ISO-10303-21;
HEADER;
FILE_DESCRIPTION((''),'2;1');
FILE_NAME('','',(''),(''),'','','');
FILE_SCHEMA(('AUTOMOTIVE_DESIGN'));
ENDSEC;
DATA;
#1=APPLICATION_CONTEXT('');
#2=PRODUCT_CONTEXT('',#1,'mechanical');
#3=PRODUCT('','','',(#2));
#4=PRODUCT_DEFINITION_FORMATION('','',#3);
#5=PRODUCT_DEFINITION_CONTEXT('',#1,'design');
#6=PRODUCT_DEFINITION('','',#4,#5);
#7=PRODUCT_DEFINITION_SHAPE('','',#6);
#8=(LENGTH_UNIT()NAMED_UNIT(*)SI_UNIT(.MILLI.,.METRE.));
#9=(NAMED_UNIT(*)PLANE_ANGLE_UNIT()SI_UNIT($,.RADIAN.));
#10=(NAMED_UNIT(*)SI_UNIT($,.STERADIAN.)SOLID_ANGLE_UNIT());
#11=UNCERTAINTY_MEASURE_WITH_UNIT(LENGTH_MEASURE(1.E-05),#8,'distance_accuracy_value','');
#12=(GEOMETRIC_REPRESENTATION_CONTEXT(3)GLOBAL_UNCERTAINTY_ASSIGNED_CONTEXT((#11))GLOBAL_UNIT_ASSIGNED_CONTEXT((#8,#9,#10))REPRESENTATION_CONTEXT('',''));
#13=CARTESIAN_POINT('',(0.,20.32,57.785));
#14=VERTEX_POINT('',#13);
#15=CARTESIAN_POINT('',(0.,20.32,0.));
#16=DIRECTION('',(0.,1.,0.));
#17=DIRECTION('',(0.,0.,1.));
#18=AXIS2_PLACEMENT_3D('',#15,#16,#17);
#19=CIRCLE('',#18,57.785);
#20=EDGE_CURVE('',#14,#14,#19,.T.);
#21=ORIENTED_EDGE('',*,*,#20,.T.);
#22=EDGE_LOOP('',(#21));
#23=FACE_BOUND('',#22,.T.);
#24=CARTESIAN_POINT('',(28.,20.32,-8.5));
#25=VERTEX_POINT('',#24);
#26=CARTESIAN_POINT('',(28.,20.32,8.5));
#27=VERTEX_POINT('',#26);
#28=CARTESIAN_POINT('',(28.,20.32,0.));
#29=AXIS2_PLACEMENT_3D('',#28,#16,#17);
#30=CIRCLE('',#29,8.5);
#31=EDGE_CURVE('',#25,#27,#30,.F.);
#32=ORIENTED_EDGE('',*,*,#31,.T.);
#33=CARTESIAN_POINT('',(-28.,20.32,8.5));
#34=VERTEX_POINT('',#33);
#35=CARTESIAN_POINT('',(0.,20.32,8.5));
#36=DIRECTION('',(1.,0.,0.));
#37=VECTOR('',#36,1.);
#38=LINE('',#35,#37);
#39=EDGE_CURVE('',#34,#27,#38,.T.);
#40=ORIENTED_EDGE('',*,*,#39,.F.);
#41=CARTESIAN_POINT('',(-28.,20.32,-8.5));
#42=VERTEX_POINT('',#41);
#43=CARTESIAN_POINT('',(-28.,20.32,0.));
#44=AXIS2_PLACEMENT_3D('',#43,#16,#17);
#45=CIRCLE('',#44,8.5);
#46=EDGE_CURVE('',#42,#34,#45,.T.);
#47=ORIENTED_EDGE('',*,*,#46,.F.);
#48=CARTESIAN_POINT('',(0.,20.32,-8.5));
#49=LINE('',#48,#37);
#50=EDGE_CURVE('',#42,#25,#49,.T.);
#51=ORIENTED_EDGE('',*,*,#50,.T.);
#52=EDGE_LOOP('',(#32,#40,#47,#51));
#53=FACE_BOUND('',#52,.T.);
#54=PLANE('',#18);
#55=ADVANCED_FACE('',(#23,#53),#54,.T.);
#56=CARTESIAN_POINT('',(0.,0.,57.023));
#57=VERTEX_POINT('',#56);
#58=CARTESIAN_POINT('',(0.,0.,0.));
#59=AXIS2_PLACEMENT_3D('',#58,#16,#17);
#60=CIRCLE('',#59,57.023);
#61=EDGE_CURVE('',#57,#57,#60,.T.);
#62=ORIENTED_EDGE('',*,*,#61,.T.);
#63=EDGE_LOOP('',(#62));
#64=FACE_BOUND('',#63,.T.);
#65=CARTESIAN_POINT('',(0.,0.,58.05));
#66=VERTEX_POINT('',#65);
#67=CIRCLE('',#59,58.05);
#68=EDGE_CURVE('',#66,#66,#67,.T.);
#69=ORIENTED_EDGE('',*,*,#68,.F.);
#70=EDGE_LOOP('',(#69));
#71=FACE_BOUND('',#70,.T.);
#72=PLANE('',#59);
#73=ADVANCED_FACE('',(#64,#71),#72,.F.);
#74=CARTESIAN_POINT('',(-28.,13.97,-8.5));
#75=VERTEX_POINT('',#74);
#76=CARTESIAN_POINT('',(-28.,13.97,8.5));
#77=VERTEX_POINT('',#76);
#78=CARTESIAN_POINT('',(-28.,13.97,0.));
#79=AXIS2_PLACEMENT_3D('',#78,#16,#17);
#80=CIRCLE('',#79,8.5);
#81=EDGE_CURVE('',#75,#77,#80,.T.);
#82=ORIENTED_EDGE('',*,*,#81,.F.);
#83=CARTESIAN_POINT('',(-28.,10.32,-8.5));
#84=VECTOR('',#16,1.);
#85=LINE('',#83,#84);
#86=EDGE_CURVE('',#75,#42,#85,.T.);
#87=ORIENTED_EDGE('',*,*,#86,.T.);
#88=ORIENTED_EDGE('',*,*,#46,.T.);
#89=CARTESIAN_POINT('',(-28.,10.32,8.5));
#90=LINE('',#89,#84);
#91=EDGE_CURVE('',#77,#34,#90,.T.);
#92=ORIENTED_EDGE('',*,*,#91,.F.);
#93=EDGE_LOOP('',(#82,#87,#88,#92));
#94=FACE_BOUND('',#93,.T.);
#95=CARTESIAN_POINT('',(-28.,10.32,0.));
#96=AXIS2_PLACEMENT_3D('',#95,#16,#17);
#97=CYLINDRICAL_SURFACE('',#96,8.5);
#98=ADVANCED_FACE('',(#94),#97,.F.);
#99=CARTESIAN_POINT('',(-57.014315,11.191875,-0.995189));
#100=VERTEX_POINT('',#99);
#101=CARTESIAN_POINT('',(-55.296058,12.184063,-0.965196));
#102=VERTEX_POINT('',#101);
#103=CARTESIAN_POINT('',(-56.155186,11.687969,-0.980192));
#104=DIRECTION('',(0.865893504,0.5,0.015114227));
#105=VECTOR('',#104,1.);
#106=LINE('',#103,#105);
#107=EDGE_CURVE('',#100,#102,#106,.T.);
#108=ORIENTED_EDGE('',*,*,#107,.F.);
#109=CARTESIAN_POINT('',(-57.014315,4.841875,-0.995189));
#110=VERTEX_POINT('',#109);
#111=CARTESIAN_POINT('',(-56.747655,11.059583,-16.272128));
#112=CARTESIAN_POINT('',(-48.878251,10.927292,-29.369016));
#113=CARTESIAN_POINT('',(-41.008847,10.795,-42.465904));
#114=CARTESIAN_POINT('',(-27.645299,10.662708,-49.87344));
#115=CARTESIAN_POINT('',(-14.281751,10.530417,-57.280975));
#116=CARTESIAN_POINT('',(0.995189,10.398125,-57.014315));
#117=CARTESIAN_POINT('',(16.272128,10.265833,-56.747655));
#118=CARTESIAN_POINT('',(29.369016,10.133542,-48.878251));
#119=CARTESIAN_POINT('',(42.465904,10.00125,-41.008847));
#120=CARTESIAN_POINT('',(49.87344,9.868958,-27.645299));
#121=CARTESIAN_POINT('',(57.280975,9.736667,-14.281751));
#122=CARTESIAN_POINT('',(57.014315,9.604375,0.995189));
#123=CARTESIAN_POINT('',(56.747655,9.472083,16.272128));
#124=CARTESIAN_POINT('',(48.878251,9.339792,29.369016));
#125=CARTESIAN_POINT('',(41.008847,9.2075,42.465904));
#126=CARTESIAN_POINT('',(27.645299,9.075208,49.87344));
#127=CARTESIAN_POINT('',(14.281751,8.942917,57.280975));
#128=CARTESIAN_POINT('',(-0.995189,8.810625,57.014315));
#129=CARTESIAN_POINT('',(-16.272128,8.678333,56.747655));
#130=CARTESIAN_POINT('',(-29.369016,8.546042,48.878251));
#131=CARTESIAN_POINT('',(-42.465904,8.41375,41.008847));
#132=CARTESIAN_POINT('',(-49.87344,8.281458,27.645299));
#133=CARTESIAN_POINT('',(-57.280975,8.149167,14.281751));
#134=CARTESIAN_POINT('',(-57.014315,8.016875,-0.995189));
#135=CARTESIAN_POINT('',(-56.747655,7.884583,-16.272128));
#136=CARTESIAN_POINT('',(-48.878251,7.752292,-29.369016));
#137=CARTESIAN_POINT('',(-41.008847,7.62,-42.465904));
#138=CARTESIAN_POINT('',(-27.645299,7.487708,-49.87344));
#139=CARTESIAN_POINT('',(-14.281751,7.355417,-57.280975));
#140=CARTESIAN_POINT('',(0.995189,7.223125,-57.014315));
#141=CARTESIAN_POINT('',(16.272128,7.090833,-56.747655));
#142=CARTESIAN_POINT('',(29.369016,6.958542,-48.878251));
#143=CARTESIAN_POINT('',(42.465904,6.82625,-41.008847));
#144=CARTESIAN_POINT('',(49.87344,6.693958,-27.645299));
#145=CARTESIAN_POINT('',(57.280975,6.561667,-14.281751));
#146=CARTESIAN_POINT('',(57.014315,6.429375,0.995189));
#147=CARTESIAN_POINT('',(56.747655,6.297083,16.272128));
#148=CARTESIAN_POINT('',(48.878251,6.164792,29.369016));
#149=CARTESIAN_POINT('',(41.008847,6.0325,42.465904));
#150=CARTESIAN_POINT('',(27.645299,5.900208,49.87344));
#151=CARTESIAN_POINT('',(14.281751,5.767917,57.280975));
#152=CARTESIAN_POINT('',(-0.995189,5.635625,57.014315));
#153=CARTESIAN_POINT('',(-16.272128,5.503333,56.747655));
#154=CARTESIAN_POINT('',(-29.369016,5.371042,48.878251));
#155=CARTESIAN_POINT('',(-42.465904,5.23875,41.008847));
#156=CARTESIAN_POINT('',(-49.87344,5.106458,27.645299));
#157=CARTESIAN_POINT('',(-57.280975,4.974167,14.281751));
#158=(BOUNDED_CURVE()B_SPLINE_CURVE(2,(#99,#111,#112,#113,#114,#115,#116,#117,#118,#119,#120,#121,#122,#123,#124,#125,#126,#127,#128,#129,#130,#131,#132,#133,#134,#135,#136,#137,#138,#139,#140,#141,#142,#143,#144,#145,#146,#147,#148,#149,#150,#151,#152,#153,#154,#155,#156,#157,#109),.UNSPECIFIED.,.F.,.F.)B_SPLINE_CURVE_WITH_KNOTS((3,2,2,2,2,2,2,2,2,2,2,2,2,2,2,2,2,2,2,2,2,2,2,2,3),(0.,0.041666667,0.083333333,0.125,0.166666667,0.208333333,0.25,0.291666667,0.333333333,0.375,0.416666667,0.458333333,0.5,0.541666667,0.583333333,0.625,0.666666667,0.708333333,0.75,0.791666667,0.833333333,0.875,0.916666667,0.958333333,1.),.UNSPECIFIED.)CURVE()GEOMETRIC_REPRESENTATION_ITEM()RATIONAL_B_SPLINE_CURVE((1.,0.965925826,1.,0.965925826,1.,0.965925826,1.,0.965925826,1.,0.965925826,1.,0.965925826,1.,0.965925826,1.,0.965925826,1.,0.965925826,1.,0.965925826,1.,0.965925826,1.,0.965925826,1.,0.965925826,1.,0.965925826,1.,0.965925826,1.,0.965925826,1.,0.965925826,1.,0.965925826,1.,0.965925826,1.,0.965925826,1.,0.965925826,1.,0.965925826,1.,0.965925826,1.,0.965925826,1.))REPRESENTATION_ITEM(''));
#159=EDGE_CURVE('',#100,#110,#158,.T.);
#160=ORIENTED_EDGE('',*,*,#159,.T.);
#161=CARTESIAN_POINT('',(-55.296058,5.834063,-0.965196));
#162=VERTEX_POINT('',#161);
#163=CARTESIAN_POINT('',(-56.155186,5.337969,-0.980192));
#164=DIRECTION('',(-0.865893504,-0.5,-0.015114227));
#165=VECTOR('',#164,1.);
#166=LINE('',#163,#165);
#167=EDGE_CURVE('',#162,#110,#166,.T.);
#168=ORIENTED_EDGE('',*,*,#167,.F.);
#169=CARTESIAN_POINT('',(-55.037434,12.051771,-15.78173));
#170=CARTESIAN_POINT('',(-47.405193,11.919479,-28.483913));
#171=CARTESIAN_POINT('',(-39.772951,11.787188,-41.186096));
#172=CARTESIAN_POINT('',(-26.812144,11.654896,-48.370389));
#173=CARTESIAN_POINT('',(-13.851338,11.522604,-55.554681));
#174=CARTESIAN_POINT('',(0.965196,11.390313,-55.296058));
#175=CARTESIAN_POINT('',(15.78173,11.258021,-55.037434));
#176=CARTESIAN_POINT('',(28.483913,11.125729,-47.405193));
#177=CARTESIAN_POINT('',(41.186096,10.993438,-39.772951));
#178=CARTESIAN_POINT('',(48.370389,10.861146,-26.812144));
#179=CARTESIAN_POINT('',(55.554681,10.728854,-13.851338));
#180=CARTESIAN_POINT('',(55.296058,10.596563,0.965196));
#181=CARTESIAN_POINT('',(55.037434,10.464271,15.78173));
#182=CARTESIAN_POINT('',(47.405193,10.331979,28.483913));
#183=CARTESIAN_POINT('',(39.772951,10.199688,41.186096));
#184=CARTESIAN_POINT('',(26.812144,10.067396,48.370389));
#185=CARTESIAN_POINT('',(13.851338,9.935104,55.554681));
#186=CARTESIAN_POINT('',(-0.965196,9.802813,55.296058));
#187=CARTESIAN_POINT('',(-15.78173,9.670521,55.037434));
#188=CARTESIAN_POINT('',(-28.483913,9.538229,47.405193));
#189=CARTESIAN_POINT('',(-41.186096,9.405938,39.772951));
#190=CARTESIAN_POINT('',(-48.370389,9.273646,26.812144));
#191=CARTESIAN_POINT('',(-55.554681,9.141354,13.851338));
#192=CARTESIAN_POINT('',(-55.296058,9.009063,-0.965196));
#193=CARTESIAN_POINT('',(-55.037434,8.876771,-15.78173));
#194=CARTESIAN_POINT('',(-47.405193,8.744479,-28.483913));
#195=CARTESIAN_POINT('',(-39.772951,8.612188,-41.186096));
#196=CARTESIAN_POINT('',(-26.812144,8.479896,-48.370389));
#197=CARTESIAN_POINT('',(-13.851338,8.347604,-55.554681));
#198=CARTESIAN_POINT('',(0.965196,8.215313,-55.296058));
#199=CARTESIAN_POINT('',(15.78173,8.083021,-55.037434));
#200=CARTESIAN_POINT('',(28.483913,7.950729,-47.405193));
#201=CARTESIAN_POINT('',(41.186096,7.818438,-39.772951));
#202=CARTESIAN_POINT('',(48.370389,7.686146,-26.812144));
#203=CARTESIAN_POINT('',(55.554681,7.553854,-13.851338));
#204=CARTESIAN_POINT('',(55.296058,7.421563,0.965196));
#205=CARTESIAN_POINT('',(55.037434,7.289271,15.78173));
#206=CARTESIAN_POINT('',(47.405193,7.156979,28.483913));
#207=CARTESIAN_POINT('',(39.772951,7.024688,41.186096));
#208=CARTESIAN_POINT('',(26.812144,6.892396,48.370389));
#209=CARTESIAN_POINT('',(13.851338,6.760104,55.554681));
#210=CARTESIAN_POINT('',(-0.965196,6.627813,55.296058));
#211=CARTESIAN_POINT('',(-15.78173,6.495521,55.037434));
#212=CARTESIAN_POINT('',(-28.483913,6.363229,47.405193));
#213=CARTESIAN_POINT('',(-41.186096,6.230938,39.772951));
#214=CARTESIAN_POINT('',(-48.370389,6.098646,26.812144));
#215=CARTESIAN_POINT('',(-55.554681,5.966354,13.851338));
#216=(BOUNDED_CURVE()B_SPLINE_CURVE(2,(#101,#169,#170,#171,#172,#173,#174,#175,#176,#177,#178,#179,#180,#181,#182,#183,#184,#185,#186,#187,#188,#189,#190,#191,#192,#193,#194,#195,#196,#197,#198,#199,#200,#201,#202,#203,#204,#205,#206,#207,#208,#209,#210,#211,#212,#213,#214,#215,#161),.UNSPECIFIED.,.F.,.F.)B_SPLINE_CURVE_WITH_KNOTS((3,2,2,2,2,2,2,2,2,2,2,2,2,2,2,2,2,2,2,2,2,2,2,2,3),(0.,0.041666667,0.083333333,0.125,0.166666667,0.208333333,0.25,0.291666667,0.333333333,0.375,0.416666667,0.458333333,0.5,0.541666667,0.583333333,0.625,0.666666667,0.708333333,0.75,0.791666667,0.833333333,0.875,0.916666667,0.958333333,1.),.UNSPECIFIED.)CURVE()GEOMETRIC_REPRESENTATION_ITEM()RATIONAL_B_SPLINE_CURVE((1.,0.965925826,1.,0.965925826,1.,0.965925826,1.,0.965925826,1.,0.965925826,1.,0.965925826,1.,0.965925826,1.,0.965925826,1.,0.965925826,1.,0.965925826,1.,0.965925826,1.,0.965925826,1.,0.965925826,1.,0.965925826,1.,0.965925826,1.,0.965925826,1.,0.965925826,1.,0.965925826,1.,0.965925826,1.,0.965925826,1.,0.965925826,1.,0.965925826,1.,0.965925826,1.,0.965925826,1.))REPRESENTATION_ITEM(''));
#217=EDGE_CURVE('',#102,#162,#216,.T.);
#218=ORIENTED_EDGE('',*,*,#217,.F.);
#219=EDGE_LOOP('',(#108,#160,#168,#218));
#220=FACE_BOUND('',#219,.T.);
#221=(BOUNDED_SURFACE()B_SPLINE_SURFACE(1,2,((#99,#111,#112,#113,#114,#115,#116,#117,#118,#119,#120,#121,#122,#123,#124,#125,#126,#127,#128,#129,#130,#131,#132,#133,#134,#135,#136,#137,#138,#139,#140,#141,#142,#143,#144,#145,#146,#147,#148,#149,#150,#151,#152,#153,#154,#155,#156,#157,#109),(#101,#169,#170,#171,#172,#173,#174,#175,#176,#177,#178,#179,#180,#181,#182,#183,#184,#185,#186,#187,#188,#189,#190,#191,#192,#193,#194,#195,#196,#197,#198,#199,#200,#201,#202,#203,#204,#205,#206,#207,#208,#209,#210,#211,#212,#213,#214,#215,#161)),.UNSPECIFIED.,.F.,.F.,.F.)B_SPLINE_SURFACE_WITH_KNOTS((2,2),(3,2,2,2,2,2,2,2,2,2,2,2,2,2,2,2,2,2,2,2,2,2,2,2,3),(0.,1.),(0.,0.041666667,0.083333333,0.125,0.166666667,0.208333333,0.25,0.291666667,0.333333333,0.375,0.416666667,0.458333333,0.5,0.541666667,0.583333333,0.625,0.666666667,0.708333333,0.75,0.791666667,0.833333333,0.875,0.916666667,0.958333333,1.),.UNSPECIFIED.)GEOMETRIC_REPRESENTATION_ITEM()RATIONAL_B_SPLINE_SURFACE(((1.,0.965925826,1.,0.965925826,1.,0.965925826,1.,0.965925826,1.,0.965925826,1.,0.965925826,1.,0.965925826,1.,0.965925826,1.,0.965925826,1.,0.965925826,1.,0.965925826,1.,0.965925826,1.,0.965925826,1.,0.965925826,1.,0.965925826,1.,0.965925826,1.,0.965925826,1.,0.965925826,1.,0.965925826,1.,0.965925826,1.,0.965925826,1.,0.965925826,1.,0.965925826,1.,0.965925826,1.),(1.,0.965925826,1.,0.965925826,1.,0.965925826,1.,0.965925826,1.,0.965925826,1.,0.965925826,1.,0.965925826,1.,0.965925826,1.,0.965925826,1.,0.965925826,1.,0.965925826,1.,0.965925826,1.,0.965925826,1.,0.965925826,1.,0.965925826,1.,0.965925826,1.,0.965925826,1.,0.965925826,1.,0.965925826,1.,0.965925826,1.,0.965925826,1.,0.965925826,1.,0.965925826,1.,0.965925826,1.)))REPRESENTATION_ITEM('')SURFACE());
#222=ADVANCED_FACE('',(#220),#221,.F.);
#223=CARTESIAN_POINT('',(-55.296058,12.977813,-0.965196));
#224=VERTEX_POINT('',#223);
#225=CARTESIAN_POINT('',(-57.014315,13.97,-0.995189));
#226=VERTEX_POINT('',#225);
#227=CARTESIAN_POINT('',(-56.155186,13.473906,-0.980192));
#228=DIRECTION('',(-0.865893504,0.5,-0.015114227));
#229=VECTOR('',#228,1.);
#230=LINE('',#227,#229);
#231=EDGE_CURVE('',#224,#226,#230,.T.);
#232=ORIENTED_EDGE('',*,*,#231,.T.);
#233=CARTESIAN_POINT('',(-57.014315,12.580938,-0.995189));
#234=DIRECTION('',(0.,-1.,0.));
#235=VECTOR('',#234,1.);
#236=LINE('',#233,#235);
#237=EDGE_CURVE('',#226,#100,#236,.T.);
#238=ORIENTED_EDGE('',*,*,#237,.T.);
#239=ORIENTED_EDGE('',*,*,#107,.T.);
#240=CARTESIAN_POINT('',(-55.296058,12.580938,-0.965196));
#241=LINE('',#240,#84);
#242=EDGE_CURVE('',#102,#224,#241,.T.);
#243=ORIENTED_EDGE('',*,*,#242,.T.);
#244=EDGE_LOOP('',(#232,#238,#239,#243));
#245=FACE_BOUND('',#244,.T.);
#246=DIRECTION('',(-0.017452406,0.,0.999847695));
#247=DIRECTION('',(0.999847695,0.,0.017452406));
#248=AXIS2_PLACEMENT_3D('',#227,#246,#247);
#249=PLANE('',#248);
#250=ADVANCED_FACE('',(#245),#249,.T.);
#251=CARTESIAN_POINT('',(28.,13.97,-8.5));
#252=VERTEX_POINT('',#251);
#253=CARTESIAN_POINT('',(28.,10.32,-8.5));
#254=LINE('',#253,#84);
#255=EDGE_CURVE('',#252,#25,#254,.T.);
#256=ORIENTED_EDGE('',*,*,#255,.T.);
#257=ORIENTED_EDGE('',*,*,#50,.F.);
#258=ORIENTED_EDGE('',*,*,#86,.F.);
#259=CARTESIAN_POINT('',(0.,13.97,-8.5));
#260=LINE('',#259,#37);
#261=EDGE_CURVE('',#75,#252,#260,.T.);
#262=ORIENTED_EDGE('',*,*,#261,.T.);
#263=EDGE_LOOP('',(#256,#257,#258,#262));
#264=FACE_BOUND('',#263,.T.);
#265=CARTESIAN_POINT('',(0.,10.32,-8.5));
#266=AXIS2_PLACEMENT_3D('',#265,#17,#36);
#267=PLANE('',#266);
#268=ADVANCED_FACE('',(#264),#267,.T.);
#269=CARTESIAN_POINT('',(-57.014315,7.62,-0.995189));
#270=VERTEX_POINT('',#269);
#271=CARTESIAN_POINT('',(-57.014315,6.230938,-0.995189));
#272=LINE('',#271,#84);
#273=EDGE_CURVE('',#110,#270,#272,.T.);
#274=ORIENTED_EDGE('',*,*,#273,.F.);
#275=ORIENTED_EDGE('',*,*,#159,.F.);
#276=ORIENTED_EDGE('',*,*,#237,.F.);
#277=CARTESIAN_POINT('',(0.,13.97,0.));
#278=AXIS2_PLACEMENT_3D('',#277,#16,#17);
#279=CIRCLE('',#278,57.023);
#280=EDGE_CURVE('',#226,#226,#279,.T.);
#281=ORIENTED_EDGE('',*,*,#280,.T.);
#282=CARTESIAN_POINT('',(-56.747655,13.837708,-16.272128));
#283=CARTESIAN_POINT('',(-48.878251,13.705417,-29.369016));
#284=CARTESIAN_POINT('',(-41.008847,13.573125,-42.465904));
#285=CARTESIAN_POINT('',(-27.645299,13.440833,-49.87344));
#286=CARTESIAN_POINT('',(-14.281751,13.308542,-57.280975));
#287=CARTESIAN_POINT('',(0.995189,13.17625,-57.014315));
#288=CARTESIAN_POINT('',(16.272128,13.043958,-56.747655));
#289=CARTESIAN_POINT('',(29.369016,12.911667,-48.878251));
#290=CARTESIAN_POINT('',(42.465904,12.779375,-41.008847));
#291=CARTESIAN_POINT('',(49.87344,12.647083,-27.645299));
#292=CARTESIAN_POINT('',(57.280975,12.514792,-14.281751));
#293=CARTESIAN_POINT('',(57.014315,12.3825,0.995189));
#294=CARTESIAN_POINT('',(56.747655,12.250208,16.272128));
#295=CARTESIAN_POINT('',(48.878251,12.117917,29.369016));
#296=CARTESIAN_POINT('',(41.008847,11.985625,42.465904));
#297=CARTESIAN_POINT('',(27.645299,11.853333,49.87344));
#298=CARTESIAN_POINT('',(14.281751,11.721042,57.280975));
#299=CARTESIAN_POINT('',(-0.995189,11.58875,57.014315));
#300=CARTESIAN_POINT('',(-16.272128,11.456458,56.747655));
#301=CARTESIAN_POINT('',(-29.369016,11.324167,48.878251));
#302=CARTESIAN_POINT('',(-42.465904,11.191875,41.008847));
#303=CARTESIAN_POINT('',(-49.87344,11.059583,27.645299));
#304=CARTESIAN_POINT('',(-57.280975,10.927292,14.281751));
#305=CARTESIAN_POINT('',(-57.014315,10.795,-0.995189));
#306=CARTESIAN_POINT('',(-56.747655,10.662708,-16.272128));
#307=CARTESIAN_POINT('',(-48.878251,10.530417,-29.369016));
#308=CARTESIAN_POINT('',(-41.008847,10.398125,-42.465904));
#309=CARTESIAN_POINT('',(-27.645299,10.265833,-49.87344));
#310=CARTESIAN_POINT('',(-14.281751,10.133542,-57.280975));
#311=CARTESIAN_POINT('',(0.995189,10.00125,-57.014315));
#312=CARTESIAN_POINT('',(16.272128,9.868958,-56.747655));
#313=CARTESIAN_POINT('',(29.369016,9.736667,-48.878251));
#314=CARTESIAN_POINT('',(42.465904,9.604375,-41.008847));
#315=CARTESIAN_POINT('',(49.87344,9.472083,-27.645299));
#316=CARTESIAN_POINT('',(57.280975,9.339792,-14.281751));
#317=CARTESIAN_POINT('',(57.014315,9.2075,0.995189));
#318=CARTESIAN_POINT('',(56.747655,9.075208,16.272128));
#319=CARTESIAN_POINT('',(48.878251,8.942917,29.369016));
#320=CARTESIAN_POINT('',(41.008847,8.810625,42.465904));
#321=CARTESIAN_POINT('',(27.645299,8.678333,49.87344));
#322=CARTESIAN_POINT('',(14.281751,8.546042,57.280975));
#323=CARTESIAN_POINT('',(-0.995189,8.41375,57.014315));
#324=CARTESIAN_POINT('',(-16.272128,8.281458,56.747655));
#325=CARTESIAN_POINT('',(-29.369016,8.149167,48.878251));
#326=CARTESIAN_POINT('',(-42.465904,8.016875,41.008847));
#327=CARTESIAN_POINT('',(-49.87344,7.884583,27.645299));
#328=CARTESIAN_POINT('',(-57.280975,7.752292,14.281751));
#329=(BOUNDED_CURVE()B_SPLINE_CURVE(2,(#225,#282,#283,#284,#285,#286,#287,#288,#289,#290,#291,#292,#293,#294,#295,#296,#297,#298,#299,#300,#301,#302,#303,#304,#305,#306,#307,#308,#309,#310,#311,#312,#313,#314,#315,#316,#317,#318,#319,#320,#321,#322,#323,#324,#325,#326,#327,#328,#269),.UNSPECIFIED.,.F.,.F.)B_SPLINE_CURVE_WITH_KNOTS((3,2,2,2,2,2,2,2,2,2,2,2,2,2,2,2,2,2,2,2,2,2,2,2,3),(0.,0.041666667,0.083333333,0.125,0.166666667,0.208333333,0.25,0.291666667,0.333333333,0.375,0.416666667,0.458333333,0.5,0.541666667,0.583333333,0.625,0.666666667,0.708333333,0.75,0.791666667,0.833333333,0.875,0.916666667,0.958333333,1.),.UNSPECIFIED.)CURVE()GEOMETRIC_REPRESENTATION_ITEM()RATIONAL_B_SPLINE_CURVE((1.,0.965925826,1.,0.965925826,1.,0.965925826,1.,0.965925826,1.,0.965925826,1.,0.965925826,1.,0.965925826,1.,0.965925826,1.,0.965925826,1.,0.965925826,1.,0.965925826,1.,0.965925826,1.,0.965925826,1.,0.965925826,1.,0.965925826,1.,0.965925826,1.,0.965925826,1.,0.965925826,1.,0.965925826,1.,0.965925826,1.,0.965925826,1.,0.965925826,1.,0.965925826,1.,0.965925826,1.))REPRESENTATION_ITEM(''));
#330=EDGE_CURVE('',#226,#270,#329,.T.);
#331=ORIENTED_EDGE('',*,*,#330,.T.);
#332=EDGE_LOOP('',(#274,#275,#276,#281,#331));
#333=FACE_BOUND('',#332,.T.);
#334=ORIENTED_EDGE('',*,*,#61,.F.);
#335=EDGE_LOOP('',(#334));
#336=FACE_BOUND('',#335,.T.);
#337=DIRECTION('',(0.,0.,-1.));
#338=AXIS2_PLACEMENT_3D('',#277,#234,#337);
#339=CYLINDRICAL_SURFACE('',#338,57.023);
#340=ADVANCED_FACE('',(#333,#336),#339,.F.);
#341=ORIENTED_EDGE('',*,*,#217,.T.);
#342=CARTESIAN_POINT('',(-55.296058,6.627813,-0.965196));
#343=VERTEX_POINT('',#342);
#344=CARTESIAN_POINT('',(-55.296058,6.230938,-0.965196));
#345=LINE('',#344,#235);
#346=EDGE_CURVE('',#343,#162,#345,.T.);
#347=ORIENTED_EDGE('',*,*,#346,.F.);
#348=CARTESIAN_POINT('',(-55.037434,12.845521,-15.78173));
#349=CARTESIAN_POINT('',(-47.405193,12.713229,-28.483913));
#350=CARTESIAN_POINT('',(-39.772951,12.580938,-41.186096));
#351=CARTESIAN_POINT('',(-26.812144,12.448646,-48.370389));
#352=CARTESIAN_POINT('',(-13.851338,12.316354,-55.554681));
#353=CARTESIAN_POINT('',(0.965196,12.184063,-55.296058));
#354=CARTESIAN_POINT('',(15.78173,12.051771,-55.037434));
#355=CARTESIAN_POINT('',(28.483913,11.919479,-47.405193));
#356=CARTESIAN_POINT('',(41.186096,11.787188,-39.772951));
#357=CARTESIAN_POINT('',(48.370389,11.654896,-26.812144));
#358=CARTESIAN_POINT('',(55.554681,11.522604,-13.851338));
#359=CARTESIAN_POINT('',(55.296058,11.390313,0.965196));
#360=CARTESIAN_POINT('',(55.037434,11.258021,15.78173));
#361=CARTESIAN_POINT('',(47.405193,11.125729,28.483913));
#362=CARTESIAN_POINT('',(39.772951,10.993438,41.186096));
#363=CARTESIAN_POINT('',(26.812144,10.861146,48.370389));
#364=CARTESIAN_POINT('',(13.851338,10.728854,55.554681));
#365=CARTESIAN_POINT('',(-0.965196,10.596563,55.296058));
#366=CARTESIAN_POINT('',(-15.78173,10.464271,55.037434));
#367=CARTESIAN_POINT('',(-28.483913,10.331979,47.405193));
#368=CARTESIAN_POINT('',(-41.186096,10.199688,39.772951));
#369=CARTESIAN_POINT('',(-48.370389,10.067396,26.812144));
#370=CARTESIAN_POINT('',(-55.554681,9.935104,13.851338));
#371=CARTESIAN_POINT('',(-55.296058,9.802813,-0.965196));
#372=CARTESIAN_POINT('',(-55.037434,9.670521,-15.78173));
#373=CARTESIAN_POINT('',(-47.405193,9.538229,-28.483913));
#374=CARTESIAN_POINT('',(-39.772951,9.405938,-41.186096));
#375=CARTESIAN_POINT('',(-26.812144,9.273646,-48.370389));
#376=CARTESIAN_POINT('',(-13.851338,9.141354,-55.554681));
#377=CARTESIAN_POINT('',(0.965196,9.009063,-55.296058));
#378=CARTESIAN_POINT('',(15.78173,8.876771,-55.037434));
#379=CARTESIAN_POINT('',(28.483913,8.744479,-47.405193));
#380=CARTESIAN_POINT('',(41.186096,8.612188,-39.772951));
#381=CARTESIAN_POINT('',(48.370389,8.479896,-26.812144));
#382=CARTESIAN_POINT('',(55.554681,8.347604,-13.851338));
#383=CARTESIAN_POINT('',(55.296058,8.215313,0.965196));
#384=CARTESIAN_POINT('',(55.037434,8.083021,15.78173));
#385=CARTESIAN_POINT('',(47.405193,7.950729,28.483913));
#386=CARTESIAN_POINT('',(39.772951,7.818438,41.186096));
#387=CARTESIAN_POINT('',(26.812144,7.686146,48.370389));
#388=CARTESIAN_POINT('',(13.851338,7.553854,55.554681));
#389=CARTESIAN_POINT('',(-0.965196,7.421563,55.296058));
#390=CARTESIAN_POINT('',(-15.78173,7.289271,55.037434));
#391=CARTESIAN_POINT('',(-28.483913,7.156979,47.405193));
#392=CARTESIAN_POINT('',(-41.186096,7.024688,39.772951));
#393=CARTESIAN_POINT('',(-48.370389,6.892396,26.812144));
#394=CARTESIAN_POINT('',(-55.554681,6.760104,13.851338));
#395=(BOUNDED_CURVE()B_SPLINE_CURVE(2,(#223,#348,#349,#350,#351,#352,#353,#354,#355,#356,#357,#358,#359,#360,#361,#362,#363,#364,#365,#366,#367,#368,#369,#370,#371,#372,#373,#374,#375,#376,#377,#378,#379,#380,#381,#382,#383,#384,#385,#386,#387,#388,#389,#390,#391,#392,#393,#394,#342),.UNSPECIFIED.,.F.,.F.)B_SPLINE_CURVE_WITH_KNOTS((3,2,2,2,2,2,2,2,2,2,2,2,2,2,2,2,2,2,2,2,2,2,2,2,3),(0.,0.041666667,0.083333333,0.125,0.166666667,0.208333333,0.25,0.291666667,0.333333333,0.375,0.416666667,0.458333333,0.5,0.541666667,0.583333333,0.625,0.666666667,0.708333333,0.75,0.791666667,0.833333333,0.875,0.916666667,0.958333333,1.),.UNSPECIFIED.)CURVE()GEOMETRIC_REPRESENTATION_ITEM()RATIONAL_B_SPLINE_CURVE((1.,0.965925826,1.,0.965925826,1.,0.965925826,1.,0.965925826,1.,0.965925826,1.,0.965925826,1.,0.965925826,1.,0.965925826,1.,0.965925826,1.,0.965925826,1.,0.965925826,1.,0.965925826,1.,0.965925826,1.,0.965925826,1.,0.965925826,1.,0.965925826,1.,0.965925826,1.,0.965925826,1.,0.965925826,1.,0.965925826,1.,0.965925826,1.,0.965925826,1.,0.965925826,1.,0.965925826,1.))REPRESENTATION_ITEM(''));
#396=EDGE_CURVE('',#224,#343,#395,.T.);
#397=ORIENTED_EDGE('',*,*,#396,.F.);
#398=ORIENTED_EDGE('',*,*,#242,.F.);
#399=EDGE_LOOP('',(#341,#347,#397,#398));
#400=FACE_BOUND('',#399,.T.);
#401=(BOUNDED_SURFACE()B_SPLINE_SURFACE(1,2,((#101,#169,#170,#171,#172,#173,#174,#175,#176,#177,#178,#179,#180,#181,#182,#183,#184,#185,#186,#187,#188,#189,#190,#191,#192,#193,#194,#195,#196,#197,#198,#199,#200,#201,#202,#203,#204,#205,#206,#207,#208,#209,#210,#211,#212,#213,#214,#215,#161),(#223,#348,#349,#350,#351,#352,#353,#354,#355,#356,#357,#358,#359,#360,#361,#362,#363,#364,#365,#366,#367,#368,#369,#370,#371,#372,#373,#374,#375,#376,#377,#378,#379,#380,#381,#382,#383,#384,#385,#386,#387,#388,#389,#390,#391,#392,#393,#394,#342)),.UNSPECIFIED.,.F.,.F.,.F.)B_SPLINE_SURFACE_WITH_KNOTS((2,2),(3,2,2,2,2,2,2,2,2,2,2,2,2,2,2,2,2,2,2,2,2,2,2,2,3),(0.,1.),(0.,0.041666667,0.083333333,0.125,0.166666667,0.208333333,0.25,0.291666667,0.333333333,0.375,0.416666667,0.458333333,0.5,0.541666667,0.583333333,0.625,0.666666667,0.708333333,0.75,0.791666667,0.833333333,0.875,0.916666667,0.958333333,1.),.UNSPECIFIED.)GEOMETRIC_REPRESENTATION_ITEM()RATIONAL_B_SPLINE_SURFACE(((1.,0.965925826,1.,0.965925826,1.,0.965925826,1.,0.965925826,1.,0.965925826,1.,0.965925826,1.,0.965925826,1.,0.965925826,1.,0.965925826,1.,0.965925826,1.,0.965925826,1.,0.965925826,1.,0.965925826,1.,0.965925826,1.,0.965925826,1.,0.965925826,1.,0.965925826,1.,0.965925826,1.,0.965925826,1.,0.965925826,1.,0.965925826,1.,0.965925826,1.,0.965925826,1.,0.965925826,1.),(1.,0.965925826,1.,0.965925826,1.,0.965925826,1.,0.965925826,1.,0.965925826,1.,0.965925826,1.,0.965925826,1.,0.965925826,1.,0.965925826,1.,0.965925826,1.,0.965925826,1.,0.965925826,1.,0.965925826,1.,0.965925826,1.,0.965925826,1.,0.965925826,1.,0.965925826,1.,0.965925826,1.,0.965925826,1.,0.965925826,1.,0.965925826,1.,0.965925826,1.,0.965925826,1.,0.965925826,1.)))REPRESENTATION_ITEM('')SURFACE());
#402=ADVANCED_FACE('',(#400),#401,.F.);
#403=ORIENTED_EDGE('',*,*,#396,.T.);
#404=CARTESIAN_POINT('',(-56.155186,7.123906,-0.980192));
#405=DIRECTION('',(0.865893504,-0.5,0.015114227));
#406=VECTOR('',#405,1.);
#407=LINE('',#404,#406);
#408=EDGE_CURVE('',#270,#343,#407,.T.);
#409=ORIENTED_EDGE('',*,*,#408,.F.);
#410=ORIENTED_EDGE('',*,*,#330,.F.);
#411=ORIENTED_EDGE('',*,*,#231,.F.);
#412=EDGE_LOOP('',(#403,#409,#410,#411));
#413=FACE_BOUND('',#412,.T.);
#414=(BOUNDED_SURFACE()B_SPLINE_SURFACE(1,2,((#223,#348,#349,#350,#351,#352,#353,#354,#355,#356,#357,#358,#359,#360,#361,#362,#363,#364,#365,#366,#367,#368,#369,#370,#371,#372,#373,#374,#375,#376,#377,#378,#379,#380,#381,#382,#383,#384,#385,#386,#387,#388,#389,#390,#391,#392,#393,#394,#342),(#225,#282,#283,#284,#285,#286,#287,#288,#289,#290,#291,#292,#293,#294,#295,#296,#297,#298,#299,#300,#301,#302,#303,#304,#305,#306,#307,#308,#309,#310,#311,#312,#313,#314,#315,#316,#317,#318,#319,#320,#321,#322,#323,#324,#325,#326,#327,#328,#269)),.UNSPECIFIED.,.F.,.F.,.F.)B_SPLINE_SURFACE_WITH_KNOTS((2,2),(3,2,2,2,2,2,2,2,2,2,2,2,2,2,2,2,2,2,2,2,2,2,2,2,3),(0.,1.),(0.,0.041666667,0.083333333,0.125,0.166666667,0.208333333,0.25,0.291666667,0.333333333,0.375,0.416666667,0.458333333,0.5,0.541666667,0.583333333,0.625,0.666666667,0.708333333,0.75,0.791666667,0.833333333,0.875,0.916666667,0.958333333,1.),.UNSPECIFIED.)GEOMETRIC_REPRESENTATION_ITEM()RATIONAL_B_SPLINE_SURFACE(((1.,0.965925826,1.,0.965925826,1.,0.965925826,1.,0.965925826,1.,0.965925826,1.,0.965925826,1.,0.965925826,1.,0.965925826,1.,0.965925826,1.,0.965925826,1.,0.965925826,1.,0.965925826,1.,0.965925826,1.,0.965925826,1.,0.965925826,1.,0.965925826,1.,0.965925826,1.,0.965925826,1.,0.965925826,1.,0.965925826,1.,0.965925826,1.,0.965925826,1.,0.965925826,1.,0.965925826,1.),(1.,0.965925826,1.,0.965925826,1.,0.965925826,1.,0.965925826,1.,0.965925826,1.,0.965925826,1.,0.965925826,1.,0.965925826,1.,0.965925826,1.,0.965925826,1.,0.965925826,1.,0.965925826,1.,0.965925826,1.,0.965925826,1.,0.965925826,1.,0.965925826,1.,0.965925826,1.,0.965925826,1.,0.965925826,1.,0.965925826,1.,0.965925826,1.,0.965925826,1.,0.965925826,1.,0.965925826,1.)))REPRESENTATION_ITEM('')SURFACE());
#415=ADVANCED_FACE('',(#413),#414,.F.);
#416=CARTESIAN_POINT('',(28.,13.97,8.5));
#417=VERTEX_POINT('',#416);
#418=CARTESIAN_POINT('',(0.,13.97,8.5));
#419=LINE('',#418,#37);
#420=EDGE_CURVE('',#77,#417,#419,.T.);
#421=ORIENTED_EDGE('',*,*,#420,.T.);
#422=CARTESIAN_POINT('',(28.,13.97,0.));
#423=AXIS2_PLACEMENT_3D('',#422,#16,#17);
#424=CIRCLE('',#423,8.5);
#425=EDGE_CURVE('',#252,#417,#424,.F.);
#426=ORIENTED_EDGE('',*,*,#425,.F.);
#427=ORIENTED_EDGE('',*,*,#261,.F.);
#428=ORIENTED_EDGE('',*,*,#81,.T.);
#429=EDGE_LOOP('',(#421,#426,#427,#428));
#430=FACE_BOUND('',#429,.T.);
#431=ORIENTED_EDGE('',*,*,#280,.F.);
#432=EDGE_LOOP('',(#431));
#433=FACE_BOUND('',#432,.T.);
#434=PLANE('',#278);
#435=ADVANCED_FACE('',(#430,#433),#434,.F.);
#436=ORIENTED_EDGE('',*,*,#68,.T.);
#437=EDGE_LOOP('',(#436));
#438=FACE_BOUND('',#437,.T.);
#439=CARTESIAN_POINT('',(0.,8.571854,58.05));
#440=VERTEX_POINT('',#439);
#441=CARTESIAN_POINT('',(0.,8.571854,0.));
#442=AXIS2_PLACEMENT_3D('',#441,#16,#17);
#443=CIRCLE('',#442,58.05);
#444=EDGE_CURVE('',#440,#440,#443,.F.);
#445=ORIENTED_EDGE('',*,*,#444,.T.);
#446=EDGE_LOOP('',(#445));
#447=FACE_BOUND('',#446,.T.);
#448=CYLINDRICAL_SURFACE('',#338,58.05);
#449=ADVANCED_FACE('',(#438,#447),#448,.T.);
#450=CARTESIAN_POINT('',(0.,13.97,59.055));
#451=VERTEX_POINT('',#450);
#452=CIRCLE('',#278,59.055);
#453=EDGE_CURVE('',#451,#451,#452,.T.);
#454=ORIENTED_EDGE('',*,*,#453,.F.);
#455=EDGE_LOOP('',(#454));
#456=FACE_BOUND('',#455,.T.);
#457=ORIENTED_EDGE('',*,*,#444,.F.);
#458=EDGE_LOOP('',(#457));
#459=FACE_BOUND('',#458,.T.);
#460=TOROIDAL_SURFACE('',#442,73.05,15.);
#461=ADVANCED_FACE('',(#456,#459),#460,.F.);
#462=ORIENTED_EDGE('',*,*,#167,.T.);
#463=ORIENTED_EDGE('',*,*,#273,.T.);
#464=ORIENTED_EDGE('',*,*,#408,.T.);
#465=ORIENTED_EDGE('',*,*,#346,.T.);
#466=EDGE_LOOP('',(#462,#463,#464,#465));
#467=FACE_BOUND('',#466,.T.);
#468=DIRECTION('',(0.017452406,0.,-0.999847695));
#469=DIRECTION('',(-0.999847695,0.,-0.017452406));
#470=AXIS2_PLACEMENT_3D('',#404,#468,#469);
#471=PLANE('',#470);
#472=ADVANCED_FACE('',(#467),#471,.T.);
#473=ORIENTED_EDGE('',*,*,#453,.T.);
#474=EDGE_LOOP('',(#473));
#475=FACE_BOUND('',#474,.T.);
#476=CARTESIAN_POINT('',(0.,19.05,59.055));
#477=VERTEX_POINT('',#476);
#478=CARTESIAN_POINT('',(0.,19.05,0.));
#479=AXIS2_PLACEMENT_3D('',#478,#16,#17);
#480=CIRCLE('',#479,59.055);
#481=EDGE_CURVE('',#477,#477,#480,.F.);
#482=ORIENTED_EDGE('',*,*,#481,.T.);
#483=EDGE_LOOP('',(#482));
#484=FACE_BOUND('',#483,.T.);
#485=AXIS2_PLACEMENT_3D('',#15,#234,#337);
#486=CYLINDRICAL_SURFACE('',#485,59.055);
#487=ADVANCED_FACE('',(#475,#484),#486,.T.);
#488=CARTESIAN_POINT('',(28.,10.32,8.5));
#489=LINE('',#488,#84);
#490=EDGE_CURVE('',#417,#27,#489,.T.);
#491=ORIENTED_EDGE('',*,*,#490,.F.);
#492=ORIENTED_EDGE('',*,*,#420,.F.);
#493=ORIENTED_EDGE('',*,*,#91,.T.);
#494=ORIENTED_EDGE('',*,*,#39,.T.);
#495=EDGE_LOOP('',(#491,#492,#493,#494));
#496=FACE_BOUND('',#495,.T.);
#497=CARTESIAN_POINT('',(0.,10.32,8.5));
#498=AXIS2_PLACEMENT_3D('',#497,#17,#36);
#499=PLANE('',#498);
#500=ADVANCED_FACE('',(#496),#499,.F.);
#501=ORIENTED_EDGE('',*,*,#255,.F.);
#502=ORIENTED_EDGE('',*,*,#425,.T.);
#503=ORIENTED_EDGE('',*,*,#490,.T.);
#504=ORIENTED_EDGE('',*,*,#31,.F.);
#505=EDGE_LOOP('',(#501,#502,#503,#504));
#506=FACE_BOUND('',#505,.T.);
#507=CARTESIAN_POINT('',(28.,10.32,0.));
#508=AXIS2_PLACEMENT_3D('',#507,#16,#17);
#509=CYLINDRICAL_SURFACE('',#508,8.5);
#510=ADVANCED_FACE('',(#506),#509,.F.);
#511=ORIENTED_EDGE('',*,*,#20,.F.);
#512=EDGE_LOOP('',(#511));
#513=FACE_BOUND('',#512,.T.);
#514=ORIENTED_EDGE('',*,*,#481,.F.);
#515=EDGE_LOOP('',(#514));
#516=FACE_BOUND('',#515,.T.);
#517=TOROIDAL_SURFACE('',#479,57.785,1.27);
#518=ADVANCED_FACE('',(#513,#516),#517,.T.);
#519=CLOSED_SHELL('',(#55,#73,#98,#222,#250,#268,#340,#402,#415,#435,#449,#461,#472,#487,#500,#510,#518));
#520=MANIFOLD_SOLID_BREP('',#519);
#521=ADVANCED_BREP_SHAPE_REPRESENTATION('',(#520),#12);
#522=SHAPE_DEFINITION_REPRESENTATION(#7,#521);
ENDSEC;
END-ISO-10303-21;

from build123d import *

# Parameters (mm, degrees)
SKETCH1_R           = 58.05
SKETCH1_R_2         = 57.023
BOSS_EXTRUDE1_DEPTH = 13.97
SKETCH2_R           = 59.055
BOSS_EXTRUDE2_DEPTH = 6.35
THREAD1_PITCH       = 3.175
FILLET1_R           = 1.27
FILLET2_R           = 15
SKETCH3_W           = 28
SKETCH3_H           = 8.5
CUT_EXTRUDE1_DEPTH  = 10


with BuildPart() as part:
    # Sketch1 → Boss-Extrude1 (new body)
    with BuildSketch(Plane(origin=(0, 0, 0), x_dir=(1, 0, 0), z_dir=(0, 1, 0))):
        with Locations(Location((0, 0, 0), (0, 0, 270))):
            Circle(SKETCH1_R)
        with Locations(Location((0, 0, 0), (0, 0, 270))):
            Circle(SKETCH1_R_2, mode=Mode.SUBTRACT)
    extrude(amount=BOSS_EXTRUDE1_DEPTH)

    # Sketch2 → Boss-Extrude2 (add)
    with BuildSketch(Plane(origin=(0, 13.97, 0), x_dir=(1, 0, 0), z_dir=(0, 1, 0))):
        with Locations(Location((0, 0, 0), (0, 0, 270))):
            Circle(SKETCH2_R)
    extrude(amount=BOSS_EXTRUDE2_DEPTH)

    # Thread1: arcs per turn and ends read off the stored shape
    # Thread1: the profile of Thread Profile3 profile screwed along a right-hand helix through 2 turns, 12 arcs to a turn; built about Z, then put on its axis
    thread1_z = Axis((0, 0, 0), (0, 0, 1))
    thread1_corners = [(57.0233, 2.5e-08, -0.000173205), (57.0233, 2.5e-08, 2.778298196), (55.304480847, 2.4e-08, 1.785937496), (55.304480847, 2.4e-08, 0.992187496)]
    with BuildLine(mode=Mode.PRIVATE) as thread1_profile:
        Line(thread1_corners[0], thread1_corners[1])
        Line(thread1_corners[1], thread1_corners[2])
        Line(thread1_corners[2], thread1_corners[3])
        Line(thread1_corners[3], thread1_corners[0])
    thread1_cap = Face(thread1_profile.wire())
    thread1_turn_angles = [0, 15, 30, 45, 60, 75, 90, 105, 120, 135, 150, 165, 180, 195, 210, 225, 240, 255, 270, 285, 300, 315, 330, 345, 360]
    thread1_turn_weights = [1, 0.9659258262890683, 1, 0.9659258262890683, 1, 0.9659258262890683, 1, 0.9659258262890683, 1, 0.9659258262890683, 1, 0.9659258262890683, 1, 0.9659258262890683, 1, 0.9659258262890683, 1, 0.9659258262890683, 1, 0.9659258262890683, 1, 0.9659258262890683, 1, 0.9659258262890683, 1]
    thread1_turn_rails = [Edge.make_bspline([Vector(p[0], p[1], 0).rotate(thread1_z, thread1_turn_angles[k]) / thread1_turn_weights[k] + Vector(0, 0, p[2] + THREAD1_PITCH * thread1_turn_angles[k] / 360) for k in range(25)], [0, 0, 0, 1, 1, 2, 2, 3, 3, 4, 4, 5, 5, 6, 6, 7, 7, 8, 8, 9, 9, 10, 10, 11, 11, 12, 12, 12], 2, thread1_turn_weights) for p in thread1_corners]
    thread1_turn_sides = [Face.make_surface_from_curves(thread1_turn_rails[p[0]], thread1_turn_rails[p[1]]) for p in [(0, 1), (1, 2), (2, 3), (3, 0)]]
    thread1 = Plane(origin=(0, 13.97, 0), x_dir=(-0.999847695, 0, -0.017452406), z_dir=(0, -1, 0)) * Solid(Shell([*[p.moved(Location((0, 0, THREAD1_PITCH * i))) for i in range(2) for p in thread1_turn_sides], thread1_cap, thread1_cap.rotate(thread1_z, 720).moved(Location((0, 0, THREAD1_PITCH * 720 / 360)))]))
    add(thread1)

    # Fillet1
    fillet1_edges = [part.edges().sort_by_distance(p)[0] for p in [
        (0, 20.32, -59.055),
    ]]
    fillet(fillet1_edges, radius=FILLET1_R)

    # Fillet2
    # the kernel refuses this fillet: 15 mm, written as the material it adds along each edge
    with BuildSketch(Plane(origin=(0, 13.97, 0), x_dir=(0, 0, 1), z_dir=(-1, 0, 0))) as fillet2_piece_1:
        with BuildLine():
            CenterArc((73.05, -5.398145515), FILLET2_R, 158.907396465, 21.092603535)
            Line((58.05, -5.398145515), (57.75, -5.398145515))
            Line((57.75, -5.398145515), (57.75, 0))
            Line((57.75, 0), (58.05, 0.3))
            ThreePointArc((58.05, 0.3), (58.5525, 0.3), (58.7751, 0.10796291))
            Line((58.7751, 0.10796291), (59.055, 0))
        make_face()
    revolve(axis=Axis((0, 13.97, 0), (0, 1, 0)))

    # Sketch3 → Cut-Extrude1 (cut)
    with BuildSketch(Plane(origin=(0, 20.32, 0), x_dir=(1, 0, 0), z_dir=(0, 1, 0))):
        with BuildLine():
            Line((-28, -8.5), (-28, 0))
            Line((-28, 0), (-36.5, 0))
            ThreePointArc((-36.5, 0), (-34.01040764, -6.01040764), (-28, -8.5))
        make_face()
        with BuildLine():
            Line((-36.5, 0), (-28, 0))
            Line((-28, 0), (-28, 8.5))
            ThreePointArc((-28, 8.5), (-34.01040764, 6.01040764), (-36.5, 0))
        make_face()
        with Locations((-14, 4.25)):
            Rectangle(SKETCH3_W, SKETCH3_H)
        Polygon((0, 8.5), (0, 0), (-28, 0), (-28, -8.5), (28, -8.5), (28, 8.5), align=None)
        with BuildLine():
            ThreePointArc((28, 8.5), (36.5, 0), (28, -8.5))
            Line((28, -8.5), (28, 8.5))
        make_face()
    extrude(amount=-CUT_EXTRUDE1_DEPTH, mode=Mode.SUBTRACT)


solid = part.part
